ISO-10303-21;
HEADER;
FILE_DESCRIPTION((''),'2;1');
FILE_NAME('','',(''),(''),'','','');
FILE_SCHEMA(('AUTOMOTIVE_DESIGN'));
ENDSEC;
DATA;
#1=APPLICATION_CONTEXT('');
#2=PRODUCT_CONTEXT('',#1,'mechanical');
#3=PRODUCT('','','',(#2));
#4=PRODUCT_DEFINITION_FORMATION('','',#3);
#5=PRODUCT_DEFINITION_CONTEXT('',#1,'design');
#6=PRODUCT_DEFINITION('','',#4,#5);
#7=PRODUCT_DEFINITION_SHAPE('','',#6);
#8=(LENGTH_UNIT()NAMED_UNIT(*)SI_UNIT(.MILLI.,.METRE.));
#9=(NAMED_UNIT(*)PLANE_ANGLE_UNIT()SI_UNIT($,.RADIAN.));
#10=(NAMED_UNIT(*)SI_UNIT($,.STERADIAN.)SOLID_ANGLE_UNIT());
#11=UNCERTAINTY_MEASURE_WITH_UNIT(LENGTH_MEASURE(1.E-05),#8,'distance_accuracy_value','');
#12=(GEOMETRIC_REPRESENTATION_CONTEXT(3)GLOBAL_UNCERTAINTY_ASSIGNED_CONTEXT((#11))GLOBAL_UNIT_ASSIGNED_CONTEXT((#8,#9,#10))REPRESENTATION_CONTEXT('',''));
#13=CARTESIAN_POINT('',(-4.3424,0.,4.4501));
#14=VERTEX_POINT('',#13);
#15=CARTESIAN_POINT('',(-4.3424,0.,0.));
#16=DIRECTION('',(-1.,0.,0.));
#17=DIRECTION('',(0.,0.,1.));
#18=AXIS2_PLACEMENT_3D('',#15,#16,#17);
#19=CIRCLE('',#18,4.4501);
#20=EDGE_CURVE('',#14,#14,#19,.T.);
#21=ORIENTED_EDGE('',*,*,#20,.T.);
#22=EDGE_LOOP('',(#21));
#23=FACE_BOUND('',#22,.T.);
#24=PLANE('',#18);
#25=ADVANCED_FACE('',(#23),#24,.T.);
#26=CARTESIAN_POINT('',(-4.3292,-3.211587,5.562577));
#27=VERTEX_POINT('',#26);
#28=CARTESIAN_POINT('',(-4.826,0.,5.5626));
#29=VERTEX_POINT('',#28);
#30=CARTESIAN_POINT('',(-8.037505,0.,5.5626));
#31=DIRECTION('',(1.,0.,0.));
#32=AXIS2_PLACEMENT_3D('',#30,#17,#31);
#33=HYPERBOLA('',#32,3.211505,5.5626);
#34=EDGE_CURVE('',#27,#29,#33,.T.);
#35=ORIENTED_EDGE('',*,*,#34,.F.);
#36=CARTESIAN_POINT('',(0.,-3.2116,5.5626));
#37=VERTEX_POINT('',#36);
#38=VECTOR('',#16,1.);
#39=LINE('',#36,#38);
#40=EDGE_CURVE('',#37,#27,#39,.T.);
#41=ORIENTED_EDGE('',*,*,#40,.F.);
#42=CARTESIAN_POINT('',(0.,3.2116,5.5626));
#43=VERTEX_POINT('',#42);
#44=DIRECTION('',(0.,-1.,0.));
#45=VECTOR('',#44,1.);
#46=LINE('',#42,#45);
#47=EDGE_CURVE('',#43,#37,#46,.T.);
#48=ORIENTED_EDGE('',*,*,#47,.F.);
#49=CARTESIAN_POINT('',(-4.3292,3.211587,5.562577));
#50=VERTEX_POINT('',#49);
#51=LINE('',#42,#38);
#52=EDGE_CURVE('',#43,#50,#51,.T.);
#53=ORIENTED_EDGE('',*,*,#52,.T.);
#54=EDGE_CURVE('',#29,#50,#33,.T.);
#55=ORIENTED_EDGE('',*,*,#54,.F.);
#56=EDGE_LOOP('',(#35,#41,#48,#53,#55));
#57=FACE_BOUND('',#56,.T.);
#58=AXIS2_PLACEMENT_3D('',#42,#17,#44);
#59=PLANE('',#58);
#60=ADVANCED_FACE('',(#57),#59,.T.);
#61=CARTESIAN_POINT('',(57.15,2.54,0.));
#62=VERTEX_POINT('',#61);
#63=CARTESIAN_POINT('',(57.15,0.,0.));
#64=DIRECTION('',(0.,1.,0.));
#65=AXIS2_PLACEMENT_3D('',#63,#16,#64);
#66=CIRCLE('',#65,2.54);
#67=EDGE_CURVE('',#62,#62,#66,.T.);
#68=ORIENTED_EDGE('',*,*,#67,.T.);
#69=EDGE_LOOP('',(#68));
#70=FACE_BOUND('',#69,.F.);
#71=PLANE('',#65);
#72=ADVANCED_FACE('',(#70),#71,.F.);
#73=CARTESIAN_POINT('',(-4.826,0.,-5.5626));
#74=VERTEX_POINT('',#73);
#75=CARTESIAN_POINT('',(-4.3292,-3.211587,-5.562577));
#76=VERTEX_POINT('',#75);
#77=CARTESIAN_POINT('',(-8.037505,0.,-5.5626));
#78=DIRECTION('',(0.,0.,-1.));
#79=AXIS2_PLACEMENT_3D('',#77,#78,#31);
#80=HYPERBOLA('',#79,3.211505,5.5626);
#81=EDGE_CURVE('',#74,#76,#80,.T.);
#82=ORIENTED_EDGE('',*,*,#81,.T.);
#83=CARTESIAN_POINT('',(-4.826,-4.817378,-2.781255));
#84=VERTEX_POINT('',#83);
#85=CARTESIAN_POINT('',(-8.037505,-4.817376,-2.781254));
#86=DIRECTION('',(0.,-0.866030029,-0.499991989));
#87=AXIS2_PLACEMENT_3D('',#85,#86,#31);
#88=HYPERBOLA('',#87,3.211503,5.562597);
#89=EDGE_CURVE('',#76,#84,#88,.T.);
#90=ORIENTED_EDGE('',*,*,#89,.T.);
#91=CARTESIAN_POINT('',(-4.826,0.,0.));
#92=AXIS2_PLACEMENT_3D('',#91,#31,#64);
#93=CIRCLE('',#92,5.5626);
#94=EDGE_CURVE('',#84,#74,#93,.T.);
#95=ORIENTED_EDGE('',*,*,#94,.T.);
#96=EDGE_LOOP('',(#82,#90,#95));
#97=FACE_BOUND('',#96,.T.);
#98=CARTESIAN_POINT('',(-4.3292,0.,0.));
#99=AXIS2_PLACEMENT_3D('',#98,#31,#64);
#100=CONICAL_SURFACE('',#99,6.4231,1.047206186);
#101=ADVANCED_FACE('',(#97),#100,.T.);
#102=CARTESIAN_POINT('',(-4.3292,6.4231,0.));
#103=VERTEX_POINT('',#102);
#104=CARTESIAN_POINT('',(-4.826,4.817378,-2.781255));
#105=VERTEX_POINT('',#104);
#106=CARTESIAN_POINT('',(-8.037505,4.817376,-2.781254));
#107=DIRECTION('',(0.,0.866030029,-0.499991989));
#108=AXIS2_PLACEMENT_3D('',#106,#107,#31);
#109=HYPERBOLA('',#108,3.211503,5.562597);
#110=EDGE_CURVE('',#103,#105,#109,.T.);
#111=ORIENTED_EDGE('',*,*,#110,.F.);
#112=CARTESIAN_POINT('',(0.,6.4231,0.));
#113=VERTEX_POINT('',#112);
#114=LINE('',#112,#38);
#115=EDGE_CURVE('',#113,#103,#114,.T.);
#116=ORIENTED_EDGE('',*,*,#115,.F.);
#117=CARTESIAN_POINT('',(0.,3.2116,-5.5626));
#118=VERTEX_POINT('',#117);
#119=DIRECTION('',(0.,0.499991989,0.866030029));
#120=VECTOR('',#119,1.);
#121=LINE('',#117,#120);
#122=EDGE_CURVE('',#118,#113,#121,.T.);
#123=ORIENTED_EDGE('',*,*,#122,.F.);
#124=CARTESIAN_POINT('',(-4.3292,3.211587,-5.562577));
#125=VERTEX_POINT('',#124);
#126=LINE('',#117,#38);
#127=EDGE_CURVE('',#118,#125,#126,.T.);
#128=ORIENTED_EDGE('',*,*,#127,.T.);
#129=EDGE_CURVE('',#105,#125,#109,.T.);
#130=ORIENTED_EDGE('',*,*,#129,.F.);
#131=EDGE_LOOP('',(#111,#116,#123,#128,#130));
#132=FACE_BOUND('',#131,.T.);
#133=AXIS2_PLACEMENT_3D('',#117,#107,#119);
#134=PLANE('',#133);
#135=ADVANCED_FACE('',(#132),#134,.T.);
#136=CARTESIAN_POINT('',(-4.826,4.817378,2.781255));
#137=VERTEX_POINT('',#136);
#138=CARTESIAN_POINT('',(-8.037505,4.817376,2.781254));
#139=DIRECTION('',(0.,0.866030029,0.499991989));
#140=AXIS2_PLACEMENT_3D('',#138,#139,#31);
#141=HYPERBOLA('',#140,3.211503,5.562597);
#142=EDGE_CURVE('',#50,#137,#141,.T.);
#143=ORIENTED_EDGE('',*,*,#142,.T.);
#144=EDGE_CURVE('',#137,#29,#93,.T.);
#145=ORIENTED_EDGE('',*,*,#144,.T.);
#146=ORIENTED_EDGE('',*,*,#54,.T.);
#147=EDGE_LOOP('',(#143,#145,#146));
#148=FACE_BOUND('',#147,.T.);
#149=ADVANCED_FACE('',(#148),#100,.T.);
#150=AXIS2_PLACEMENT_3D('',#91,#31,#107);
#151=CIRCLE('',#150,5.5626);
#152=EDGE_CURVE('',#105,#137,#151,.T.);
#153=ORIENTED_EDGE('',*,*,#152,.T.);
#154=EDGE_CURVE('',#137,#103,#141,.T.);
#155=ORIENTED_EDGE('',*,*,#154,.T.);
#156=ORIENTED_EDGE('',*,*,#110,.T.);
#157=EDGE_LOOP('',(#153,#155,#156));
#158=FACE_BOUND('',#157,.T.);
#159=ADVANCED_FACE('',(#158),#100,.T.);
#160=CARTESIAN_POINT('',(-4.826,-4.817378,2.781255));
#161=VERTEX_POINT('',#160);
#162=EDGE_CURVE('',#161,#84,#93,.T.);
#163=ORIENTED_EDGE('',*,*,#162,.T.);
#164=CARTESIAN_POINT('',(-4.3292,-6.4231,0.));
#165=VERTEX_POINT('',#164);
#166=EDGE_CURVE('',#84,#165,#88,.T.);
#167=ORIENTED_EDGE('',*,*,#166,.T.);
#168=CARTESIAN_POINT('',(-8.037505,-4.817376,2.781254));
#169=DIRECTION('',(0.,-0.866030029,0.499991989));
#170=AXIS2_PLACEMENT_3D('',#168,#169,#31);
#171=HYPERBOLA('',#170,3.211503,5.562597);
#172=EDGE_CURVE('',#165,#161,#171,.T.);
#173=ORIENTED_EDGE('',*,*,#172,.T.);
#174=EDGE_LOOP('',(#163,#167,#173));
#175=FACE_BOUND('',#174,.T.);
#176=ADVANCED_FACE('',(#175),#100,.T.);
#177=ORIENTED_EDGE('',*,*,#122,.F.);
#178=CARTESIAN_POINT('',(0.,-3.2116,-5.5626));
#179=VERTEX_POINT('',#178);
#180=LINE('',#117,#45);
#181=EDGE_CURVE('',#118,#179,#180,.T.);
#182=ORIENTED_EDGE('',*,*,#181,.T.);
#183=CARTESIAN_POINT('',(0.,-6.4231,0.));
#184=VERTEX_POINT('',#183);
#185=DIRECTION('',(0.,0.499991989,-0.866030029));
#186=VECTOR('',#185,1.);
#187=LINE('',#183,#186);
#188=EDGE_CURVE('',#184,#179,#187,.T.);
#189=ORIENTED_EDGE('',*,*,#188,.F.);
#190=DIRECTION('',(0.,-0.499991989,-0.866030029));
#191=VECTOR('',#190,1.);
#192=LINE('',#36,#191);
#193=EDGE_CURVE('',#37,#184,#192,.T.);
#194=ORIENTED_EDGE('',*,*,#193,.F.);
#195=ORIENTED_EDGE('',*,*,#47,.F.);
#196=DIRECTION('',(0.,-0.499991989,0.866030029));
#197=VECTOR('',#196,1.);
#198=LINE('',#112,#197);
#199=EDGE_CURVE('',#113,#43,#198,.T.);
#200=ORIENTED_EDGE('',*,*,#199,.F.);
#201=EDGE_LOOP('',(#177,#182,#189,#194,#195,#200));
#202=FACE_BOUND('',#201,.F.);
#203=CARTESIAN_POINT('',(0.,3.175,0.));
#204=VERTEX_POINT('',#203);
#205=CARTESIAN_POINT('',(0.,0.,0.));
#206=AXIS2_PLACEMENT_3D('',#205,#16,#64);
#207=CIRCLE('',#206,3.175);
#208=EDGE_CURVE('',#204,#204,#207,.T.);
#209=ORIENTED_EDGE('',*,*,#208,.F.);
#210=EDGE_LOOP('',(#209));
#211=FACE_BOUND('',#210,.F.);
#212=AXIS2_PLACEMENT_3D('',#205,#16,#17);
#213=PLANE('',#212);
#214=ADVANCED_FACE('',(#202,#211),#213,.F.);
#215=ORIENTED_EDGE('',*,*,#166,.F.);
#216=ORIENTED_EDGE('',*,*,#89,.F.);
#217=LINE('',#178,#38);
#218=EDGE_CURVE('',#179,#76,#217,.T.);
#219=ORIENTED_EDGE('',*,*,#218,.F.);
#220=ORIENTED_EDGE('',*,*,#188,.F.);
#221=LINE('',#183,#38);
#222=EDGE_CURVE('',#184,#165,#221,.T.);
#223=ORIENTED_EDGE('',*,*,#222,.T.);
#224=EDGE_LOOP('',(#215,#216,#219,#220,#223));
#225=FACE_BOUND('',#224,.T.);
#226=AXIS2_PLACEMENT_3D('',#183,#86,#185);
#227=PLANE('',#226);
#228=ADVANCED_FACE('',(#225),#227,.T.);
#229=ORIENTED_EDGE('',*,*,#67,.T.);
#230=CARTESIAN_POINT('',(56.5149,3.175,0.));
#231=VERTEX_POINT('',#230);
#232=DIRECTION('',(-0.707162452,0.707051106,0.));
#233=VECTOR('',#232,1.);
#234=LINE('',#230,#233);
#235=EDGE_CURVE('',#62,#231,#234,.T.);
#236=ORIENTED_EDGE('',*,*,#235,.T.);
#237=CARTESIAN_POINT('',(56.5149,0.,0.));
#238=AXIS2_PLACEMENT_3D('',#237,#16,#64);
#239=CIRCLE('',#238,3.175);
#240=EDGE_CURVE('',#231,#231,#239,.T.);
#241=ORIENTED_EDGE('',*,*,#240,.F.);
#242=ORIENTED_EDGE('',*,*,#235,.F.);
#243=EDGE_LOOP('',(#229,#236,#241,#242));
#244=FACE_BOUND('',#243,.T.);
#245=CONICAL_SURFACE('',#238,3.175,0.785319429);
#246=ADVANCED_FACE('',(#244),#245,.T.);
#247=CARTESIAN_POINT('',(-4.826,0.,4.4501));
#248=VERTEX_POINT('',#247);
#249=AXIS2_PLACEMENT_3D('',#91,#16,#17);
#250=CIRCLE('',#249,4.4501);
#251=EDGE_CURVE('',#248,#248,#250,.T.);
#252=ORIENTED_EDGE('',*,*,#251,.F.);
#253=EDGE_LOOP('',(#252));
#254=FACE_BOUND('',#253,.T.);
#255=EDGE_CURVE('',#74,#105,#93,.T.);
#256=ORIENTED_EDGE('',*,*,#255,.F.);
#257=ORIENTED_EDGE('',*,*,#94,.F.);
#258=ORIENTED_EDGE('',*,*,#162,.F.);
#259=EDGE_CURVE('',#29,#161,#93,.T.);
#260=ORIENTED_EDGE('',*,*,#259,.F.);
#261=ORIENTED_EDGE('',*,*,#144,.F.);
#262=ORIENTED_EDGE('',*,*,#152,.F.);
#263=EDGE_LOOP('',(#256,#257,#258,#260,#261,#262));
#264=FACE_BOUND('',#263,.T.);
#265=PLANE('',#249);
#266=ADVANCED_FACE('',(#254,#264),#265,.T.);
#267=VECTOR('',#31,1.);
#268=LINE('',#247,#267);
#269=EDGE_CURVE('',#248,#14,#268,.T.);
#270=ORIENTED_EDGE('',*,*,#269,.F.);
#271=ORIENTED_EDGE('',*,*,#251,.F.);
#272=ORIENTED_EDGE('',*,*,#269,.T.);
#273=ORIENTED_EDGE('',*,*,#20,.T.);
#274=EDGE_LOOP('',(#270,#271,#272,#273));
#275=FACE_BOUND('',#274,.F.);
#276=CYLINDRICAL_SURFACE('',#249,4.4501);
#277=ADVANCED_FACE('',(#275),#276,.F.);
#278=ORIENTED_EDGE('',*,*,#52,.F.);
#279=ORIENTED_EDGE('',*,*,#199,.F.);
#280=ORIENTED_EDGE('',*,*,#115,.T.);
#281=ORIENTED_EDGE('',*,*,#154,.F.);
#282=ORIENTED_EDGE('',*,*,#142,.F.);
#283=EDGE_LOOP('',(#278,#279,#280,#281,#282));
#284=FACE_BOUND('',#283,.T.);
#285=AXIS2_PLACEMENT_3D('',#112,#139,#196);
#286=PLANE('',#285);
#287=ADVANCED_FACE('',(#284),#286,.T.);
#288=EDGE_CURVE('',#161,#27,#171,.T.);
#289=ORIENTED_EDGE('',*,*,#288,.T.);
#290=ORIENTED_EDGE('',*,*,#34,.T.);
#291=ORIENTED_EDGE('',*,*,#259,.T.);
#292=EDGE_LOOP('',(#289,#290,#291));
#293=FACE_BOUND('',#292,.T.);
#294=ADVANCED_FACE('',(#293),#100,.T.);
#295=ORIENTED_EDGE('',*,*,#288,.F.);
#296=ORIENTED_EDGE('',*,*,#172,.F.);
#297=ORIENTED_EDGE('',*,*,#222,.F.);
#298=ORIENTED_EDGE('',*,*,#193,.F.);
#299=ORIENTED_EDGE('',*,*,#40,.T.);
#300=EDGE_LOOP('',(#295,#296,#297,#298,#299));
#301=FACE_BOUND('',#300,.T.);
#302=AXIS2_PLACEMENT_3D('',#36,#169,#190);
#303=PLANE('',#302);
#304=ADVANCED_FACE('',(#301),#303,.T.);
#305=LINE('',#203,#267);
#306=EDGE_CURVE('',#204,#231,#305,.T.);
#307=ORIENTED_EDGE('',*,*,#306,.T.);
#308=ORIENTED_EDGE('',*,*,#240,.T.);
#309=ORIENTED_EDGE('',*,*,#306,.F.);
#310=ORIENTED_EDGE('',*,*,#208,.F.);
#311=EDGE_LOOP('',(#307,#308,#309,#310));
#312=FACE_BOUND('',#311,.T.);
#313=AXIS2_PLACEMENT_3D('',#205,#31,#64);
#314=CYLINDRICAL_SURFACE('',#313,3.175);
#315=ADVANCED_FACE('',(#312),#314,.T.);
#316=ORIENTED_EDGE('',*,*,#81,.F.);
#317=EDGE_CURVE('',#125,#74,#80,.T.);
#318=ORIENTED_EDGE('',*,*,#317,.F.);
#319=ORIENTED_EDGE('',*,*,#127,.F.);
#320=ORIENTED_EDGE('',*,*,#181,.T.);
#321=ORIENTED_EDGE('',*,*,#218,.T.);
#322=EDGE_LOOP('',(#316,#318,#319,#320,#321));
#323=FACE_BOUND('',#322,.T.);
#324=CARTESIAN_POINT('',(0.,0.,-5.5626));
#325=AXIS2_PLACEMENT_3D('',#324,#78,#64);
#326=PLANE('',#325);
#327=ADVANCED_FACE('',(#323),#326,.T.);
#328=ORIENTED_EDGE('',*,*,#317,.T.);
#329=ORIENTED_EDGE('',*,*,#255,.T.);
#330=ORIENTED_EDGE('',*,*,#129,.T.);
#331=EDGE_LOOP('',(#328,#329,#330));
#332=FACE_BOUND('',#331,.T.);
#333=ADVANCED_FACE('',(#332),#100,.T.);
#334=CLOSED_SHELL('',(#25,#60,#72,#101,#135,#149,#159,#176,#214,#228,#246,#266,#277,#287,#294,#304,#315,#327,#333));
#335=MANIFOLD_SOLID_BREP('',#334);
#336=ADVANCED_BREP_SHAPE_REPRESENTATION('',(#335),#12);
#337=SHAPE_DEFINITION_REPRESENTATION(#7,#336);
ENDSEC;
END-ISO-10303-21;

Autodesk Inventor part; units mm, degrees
ref_plane "YZ Plane" through (0, 0, 0) normal (1, 0, 0) x (0, 1, 0)
ref_plane "XZ Plane" through (0, 0, 0) normal (0, 1, 0) x (-1, 0, 0)
sketch "Sketch1" plane through (0, 0, 0) normal (0, 0, 1) x (1, 0, 0)
  line L0 (0, 3.175) -> (57.15, 3.175)
  line L1 (57.15, 3.175) -> (57.15, 0)
  line L2 (57.15, 0) -> (0, 0)
  line L3 (0, 0) -> (0, 3.175)
  line L4 (0, -0.635) -> (0, 3.81) projected
  line L5 (-11.43, 0) -> (68.58, 0) projected
  dimension "d1" = 6.35
  dimension "d13" = 57.15
revolve "Body" add sketch "Sketch1" angle 360 about axis through (57.15, 0, 0) along (-1, 0, 0)
sketch "Sketch2" plane through (0, 0, 0) normal (-1, 0, 0) x (0, 0, 1)
  line L0 (0, 6.4231) -> (5.5626, 3.2116)
  line L1 (5.5626, 3.2116) -> (5.5626, -3.2116)
  line L2 (5.5626, -3.2116) -> (0, -6.4231)
  line L3 (0, -6.4231) -> (-5.5626, -3.2116)
  line L4 (-5.5626, -3.2116) -> (-5.5626, 3.2116)
  line L5 (-5.5626, 3.2116) -> (0, 6.4231)
  line L6 (-7.7876, 0) -> (7.7876, 0) projected
  line L7 (0, 8.9924) -> (0, -8.9924) projected
  point P0 (0, 0)
  point P1 (0, 0)
  point P2 (0, 0)
  dimension "d8" = 11.1252
extrude "Head" add sketch "Sketch2" along normal blind 4.826
sketch "Sketch3" plane through (-4.826, 0, 0) normal (-1, 0, 0) x (0, 0, 1)
  circle A0 centre (0, 0) radius 4.4501
  point P0 (0, 0)
  dimension "d18" = 8.9002
extrude "Indent" cut sketch "Sketch3" against normal blind 0.4836
sketch "Sketch4" plane through (0, 0, 0) normal (0, 0, 1) x (1, 0, 0)
  line L0 (-4.826, 5.5626) -> (-4.826, 6.4231)
  line L1 (-4.826, 6.4231) -> (-4.3292, 6.4231)
  line L2 (-4.3292, 6.4231) -> (-4.826, 5.5626)
  line L3 (-5.7912, 0) -> (0.9652, 0) projected
  line L4 (0, 6.4231) -> (-4.826, 6.4231) projected
  line L5 (-4.826, 3.2116) -> (-4.826, 6.4231) projected
  dimension "d4" = 30
  dimension "d17" = 11.1252
revolve "Chamfer1" cut sketch "Sketch4" angle 360 about axis through (-10, 0, 0) along (1, 0, 0)
thread "Thread" size "1/4-20 UNC" class "2A" standard "ANSI Unified Screw Threads" length 48.5775
chamfer "Chamfer2" distance 0.635 distance2 0.6351 1 edges at (57.15, -3.175, 0) measured on face at (57.15, -0.0983, 0.932)
ref_plane "Work Plane1" through (1.75, 0, 0) normal (0, 0, -1) x (1, 0, 0)
equation "\"d1\" = GD"
equation "\"d13\" = NLG"
equation "\"d8\" = SW"
equation "\"d2\" = KOH - SD"
equation "\"d18\" = KOD2"
equation "\"d4\" = ANG1"
equation "\"d17\" = SW"
equation "\"d9\" = GEL"
equation "\"d5\" = -0.5 * SPD + 0.5 * GD"
equation "\"NLG\" = 57.15"
equation "\"GD\" = NND"
equation "\"BDM\" = NND"
equation "\"KOH\" = 4.826"
equation "\"GEL\" = 48.5775"
equation "\"SW\" = 11.1252"
equation "\"SPD\" = GD1"
equation "\"SD\" = 0"
equation "\"ANG1\" = 30deg"
equation "\"GAL\" = 0.635"
equation "\"GUL\" = GAL"
equation "\"KOH2\" = 0.1 * KOH"
equation "\"KOD2\" = 0.8 * SW"
equation "\"GD1\" = 5.08"
equation "\"THREADDIA\" = 6.35"
equation "\"SDH\" = SW"
equation "\"TOA\" = 30deg"
equation "\"RR\" = 0.0635"
equation "\"NND\" = 6.35"
equation "\"SW0\" = SW"
equation "\"SD2\" = NND"
equation "\"E0\" = 1.155 * SW"
properties part number "ANSI B18.6.3 - 1/4-20 UNC - 2.25" material "Steel, Mild"
